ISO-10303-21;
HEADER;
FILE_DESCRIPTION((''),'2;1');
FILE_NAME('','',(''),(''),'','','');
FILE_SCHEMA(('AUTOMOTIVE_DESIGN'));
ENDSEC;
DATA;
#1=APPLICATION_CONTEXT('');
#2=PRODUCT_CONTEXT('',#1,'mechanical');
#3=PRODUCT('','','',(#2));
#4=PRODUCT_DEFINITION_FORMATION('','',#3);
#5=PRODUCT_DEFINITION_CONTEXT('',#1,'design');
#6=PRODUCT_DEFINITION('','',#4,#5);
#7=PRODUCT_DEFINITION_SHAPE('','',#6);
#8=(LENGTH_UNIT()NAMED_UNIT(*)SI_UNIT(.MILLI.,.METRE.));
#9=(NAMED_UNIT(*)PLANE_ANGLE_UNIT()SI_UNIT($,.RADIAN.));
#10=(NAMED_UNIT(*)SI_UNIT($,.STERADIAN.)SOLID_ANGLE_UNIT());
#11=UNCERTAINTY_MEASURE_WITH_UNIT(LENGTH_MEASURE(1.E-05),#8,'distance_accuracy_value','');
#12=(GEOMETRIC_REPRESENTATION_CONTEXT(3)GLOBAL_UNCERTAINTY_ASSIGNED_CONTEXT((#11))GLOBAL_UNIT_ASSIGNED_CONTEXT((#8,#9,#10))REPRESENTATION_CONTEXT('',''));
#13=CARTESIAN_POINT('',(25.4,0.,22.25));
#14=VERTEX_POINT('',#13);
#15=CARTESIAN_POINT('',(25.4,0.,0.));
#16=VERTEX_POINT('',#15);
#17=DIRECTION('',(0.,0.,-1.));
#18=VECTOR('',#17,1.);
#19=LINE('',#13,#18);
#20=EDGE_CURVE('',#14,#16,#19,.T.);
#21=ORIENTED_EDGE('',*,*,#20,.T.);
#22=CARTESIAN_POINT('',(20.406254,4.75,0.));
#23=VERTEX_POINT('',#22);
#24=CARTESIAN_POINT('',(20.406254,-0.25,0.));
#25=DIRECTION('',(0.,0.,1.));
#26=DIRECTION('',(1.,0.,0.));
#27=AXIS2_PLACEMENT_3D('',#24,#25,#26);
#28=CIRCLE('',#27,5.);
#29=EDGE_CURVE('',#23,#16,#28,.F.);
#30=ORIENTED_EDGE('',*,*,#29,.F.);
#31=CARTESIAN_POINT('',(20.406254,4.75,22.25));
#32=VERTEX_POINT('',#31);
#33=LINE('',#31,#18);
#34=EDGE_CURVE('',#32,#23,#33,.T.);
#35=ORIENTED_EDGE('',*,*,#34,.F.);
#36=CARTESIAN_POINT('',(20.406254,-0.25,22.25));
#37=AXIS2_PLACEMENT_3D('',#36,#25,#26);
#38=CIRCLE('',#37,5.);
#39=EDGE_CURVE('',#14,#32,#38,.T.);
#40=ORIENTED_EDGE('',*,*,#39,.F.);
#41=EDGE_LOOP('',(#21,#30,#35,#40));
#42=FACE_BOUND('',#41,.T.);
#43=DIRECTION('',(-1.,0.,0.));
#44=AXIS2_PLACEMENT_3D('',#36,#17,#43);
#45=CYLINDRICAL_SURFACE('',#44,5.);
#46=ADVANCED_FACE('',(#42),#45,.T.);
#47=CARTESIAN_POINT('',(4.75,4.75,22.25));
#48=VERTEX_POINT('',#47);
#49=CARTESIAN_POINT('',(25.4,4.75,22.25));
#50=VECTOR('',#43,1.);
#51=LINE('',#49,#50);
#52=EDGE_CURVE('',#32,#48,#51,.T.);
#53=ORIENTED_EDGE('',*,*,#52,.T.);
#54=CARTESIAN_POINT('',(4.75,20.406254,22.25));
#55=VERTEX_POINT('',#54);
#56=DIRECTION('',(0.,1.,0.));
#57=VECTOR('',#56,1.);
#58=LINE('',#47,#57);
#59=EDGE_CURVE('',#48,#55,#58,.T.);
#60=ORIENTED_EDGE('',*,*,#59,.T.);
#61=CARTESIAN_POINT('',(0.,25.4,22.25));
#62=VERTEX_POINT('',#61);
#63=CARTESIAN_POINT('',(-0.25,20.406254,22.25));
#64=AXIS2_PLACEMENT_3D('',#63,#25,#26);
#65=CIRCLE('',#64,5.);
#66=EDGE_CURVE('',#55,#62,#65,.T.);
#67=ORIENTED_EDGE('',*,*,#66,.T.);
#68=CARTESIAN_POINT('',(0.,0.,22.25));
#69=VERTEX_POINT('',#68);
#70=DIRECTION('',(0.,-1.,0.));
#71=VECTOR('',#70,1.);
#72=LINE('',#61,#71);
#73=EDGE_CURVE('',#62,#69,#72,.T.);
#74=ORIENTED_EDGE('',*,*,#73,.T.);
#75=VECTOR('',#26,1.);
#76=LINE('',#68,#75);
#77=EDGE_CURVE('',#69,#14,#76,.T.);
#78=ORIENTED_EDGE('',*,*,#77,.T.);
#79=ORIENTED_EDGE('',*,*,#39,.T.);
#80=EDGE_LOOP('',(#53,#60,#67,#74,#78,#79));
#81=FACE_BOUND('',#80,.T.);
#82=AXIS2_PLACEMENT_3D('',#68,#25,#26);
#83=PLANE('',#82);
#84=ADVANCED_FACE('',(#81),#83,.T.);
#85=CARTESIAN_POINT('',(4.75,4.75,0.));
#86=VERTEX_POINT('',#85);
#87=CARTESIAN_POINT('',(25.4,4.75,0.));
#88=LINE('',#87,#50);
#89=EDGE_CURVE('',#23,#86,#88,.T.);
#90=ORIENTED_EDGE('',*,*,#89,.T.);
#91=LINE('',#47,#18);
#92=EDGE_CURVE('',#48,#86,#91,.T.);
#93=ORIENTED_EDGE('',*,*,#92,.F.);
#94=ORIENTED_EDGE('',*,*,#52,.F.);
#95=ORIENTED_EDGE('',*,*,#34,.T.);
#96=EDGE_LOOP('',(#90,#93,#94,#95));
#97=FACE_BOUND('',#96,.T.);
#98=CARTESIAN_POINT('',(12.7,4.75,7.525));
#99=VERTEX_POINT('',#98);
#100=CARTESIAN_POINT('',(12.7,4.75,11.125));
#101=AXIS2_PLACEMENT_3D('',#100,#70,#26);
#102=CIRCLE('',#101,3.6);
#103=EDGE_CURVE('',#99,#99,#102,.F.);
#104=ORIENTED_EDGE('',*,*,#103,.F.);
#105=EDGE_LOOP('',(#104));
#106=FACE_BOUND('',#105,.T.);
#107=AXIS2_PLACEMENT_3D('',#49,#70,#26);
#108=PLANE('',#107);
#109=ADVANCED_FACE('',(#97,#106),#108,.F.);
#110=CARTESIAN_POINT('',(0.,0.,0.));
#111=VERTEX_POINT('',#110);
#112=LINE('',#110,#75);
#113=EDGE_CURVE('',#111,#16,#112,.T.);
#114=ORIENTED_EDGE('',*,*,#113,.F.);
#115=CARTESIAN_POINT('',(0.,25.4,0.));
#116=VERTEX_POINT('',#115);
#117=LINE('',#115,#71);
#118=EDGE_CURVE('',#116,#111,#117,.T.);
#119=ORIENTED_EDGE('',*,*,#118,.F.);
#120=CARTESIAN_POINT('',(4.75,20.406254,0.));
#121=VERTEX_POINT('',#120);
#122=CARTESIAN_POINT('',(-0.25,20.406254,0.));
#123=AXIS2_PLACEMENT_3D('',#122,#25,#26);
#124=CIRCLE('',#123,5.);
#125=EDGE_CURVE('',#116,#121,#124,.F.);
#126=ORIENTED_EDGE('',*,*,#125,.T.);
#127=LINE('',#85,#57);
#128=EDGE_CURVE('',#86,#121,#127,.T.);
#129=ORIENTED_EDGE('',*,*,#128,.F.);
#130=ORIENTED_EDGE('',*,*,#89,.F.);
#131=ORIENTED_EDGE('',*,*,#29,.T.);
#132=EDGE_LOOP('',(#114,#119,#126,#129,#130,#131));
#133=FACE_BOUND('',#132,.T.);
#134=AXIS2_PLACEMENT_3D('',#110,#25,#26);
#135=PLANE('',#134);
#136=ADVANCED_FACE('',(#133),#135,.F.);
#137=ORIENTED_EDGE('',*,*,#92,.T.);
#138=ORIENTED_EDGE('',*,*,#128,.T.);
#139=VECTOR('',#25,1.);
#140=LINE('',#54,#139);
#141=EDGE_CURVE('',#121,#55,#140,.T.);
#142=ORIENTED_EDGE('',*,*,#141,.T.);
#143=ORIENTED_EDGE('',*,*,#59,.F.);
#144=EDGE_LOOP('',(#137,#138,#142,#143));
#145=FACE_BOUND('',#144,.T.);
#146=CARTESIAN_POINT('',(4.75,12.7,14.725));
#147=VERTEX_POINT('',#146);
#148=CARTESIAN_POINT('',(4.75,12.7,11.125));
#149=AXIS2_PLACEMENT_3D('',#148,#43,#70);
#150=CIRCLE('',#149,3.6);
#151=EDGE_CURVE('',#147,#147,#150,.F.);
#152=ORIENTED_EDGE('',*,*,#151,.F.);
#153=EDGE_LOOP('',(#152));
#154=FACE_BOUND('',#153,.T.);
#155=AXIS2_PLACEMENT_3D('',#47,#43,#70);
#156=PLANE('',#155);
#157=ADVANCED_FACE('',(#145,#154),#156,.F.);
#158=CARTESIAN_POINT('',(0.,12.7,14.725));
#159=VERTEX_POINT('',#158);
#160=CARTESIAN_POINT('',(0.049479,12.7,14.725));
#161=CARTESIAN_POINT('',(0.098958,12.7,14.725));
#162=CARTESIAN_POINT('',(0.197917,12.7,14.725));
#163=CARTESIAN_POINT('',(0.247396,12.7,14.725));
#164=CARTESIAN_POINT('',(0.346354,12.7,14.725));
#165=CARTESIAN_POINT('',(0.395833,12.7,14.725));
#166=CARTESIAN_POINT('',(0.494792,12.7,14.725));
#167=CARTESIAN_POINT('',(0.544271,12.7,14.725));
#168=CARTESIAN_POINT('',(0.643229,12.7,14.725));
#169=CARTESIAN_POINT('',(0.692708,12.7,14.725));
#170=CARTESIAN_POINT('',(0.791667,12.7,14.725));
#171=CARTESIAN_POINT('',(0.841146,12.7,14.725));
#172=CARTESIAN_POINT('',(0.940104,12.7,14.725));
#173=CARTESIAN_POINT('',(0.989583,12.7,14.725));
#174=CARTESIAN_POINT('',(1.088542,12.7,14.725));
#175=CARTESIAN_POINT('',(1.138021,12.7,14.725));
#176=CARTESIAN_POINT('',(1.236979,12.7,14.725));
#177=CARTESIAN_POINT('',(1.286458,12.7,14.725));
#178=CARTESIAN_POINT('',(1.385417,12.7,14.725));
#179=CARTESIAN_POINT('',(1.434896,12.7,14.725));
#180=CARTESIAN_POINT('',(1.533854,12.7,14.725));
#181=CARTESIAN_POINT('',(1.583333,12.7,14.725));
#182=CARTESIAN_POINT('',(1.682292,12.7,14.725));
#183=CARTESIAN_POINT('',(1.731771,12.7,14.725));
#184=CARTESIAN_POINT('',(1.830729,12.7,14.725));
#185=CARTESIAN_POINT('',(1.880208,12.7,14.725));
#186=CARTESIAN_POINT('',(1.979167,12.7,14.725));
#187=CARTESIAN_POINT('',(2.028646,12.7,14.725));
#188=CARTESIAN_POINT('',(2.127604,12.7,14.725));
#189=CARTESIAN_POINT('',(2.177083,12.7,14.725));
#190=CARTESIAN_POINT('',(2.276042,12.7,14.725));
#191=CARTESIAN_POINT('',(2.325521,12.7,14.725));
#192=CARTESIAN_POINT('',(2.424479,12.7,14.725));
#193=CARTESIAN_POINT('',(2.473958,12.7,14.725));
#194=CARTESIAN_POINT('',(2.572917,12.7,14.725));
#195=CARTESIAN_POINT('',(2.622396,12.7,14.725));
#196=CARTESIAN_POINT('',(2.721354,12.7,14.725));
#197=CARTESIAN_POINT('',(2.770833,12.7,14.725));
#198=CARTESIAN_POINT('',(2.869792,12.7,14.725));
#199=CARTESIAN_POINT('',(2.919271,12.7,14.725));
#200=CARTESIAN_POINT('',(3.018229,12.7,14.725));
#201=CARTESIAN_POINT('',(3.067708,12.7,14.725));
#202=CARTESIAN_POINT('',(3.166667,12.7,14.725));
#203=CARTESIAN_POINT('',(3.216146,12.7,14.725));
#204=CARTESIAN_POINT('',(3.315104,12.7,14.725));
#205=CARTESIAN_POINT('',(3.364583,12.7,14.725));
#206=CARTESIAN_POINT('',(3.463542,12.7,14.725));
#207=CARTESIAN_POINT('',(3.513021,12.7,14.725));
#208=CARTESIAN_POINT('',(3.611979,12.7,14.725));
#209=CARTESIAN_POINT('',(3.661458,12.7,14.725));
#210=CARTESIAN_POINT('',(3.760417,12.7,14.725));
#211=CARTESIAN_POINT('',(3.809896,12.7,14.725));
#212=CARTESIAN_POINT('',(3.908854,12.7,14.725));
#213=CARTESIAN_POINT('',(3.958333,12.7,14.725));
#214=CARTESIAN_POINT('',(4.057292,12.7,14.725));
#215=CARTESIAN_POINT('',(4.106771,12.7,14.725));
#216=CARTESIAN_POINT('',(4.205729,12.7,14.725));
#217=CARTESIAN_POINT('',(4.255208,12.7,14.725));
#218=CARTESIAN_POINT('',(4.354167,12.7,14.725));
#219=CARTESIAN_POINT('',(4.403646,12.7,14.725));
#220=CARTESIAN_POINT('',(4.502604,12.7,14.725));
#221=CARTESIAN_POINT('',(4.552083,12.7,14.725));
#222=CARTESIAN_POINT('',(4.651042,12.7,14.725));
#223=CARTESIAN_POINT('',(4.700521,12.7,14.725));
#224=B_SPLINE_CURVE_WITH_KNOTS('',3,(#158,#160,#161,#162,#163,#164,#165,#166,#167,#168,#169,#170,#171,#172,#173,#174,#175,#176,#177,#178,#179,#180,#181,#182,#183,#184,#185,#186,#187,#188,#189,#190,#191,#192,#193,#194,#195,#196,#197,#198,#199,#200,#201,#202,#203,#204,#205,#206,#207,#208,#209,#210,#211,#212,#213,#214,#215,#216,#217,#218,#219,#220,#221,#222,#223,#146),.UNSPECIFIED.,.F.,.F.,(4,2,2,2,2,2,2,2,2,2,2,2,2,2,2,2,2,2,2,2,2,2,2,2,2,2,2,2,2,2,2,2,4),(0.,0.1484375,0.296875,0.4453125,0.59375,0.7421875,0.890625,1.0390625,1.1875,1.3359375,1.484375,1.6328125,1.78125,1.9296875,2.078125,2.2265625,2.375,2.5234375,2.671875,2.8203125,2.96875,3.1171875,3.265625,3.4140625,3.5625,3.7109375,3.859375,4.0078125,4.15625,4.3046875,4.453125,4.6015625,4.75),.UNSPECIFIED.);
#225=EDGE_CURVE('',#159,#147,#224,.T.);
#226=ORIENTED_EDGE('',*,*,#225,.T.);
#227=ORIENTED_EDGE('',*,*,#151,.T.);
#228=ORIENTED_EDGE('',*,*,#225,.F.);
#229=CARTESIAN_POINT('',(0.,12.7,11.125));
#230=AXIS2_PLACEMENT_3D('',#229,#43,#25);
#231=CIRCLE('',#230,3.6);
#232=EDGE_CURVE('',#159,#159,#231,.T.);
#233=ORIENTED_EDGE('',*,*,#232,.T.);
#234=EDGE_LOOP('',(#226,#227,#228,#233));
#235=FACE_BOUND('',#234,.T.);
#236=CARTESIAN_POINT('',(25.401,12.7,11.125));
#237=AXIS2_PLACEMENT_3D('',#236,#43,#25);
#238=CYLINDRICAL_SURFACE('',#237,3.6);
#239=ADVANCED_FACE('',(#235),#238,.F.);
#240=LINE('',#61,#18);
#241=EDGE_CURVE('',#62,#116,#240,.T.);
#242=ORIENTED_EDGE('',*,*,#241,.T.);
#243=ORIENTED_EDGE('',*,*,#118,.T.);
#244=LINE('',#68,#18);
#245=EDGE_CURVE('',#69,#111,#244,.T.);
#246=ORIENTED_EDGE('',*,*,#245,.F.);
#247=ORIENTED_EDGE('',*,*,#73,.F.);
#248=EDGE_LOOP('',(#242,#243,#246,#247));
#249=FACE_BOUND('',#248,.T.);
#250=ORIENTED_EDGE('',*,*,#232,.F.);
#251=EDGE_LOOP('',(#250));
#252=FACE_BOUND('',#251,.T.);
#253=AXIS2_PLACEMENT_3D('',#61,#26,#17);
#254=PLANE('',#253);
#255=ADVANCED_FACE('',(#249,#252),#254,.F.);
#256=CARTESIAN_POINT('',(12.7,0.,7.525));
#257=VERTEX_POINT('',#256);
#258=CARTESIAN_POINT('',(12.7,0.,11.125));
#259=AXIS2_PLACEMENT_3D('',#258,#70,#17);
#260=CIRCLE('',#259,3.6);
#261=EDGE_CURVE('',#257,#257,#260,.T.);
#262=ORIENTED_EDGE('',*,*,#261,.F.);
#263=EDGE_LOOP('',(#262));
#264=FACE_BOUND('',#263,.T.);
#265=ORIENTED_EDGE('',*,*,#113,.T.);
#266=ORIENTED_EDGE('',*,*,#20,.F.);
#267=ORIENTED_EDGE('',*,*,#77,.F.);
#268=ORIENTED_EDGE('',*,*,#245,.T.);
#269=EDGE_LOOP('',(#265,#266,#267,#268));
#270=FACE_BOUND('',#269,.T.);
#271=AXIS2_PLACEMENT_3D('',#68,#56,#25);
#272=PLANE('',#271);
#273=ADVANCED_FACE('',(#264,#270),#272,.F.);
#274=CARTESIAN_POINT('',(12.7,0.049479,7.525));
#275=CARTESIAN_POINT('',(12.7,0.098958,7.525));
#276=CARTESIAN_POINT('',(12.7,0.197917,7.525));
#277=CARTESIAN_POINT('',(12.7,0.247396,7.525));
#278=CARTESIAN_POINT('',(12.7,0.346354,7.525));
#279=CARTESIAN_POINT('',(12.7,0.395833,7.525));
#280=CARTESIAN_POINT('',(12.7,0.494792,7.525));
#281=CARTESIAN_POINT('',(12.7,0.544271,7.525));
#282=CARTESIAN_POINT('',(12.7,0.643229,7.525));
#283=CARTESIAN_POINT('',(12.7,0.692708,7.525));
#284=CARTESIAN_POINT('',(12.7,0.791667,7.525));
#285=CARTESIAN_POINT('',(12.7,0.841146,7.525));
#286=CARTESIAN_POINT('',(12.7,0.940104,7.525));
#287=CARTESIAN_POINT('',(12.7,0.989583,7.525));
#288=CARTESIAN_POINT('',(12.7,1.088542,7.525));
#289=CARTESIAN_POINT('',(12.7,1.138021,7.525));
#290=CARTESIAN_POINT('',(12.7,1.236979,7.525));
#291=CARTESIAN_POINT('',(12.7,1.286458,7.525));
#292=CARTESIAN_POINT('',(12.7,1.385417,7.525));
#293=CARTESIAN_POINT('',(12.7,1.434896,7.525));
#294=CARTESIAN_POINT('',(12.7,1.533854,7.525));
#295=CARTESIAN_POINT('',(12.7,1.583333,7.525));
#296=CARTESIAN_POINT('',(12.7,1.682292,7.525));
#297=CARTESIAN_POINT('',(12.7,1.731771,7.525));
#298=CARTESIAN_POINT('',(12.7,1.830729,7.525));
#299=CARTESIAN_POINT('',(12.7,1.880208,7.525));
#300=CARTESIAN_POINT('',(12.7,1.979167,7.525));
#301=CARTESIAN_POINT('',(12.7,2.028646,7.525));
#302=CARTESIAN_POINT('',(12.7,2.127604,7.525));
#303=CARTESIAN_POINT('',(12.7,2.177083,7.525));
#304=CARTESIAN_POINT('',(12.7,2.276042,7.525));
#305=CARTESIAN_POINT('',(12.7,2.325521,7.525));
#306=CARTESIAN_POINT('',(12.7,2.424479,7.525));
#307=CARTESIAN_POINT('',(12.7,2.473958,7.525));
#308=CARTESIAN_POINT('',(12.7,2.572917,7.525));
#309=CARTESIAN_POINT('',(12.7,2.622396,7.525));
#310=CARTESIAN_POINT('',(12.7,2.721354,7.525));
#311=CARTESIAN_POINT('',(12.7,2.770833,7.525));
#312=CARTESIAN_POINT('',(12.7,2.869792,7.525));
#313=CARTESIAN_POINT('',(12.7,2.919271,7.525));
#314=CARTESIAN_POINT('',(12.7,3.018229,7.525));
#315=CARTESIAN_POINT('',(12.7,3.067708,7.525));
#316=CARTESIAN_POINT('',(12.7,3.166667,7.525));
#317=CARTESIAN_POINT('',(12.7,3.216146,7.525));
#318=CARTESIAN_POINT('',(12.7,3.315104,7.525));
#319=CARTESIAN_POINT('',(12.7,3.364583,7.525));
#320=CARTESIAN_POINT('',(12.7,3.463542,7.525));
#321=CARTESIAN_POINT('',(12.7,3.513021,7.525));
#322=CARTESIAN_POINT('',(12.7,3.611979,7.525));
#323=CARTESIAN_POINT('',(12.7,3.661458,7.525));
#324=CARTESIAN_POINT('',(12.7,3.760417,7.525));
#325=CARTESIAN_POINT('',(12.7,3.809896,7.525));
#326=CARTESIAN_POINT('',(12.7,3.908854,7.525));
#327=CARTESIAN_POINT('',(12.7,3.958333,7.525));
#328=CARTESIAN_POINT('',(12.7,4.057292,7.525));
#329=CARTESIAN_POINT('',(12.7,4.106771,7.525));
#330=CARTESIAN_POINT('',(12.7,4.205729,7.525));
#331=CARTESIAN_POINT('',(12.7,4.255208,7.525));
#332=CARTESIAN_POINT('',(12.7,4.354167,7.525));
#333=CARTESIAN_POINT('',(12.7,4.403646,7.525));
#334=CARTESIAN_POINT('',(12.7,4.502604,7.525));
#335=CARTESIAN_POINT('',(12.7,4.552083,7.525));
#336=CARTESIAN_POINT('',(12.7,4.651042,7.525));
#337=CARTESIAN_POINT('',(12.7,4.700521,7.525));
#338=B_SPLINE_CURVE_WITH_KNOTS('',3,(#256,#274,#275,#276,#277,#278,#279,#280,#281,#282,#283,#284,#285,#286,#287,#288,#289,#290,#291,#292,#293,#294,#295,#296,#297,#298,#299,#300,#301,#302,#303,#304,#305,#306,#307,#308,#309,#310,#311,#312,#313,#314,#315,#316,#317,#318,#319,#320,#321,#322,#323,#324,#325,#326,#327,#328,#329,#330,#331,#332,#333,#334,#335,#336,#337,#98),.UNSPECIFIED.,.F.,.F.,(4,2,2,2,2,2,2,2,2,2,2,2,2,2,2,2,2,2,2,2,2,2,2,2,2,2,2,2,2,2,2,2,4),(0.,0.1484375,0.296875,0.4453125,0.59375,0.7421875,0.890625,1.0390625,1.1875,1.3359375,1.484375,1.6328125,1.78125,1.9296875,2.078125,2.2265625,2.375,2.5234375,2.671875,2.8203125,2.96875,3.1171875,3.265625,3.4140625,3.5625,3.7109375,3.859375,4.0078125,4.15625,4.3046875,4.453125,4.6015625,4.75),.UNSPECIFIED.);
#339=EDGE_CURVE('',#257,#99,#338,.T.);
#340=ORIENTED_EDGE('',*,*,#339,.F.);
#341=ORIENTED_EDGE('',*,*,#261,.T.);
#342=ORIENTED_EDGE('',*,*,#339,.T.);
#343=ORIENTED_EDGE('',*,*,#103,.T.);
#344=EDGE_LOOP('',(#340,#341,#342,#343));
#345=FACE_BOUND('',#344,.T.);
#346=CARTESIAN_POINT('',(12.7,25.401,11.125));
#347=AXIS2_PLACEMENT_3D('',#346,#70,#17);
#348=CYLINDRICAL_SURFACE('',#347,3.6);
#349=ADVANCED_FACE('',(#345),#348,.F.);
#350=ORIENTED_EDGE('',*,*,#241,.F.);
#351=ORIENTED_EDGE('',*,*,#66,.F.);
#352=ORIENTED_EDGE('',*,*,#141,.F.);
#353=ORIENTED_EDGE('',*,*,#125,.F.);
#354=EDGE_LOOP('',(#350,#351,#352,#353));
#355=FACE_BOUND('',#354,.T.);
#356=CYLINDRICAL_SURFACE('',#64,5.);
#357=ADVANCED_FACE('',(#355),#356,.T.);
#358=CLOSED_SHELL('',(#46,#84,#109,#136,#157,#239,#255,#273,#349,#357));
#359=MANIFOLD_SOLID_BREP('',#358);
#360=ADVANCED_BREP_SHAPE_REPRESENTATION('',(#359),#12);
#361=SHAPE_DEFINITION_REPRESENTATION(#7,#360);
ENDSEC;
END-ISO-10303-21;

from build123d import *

# Parameters (mm, degrees)
BOSS_EXTRUDE1_DEPTH = 22.25
FILLET1_R           = 5
CUT_EXTRUDE1_REACH  = 44.254
SKETCH6_R           = 3.6
CUT_EXTRUDE2_REACH  = 44.254
SKETCH7_R           = 3.6


with BuildPart() as part:
    # Sketch2 → Boss-Extrude1 (new body)
    with BuildSketch(Plane.XY):
        Polygon((0, 25.4), (0, 0), (25.4, 0), (25.4, 4.75), (4.75, 4.75), (4.75, 25.4), align=None)
    extrude(amount=BOSS_EXTRUDE1_DEPTH)

    # Fillet1
    # the kernel refuses this fillet: 5 mm, written as the material it takes off along each edge
    with BuildSketch(Plane(origin=(4.75, 25.4, -12.484365222), x_dir=(0, -1, 0), z_dir=(0, 0, 1))) as fillet1_piece_1:
        with BuildLine():
            CenterArc((4.993746089, -5), FILLET1_R, 90, 87.134016017)
            Line((0, -4.75), (-0.099874922, -4.745))
            ThreePointArc((-0.099874922, -4.745), (-0.1, -2.375), (-0.1, 0))
            Line((-0.1, 0), (0, 0.1))
            Line((0, 0.1), (4.993746089, 0.1))
            Line((4.993746089, 0.1), (4.993746089, 0))
        make_face()
    extrude(amount=47.218730444, mode=Mode.SUBTRACT)
    with BuildSketch(Plane(origin=(25.4, 4.75, -12.484365222), x_dir=(0, -1, 0), z_dir=(0, 0, 1))) as fillet1_piece_2:
        with BuildLine():
            CenterArc((5, -4.993746089), FILLET1_R, 92.865983983, 87.134016017)
            Line((0, -4.993746089), (-0.1, -4.993746089))
            Line((-0.1, -4.993746089), (-0.1, 0))
            Line((-0.1, 0), (0, 0.1))
            ThreePointArc((0, 0.1), (2.375, 0.1), (4.745, 0.099874922))
            Line((4.745, 0.099874922), (4.75, 0))
        make_face()
    extrude(amount=47.218730444, mode=Mode.SUBTRACT)

    # Sketch6 → Cut-Extrude1 (cut, up to next)
    with BuildSketch(Plane.XZ, mode=Mode.PRIVATE) as cut_extrude1_sk1:
        with Locations(Location((12.7, 11.125, 0), (0, 0, 270))):
            Circle(SKETCH6_R)
    cut_extrude1_tool1 = extrude(cut_extrude1_sk1.sketch, amount=-CUT_EXTRUDE1_REACH, mode=Mode.PRIVATE) & part.part
    add(cut_extrude1_tool1.solids().sort_by_distance((12.7, 0, 11.125))[0], mode=Mode.SUBTRACT)

    # Sketch7 → Cut-Extrude2 (cut, up to next)
    with BuildSketch(Plane.ZY, mode=Mode.PRIVATE) as cut_extrude2_sk1:
        with Locations((11.125, 12.7)):
            Circle(SKETCH7_R)
    cut_extrude2_tool1 = extrude(cut_extrude2_sk1.sketch, amount=-CUT_EXTRUDE2_REACH, mode=Mode.PRIVATE) & part.part
    add(cut_extrude2_tool1.solids().sort_by_distance((0, 12.7, 11.125))[0], mode=Mode.SUBTRACT)


solid = part.part
